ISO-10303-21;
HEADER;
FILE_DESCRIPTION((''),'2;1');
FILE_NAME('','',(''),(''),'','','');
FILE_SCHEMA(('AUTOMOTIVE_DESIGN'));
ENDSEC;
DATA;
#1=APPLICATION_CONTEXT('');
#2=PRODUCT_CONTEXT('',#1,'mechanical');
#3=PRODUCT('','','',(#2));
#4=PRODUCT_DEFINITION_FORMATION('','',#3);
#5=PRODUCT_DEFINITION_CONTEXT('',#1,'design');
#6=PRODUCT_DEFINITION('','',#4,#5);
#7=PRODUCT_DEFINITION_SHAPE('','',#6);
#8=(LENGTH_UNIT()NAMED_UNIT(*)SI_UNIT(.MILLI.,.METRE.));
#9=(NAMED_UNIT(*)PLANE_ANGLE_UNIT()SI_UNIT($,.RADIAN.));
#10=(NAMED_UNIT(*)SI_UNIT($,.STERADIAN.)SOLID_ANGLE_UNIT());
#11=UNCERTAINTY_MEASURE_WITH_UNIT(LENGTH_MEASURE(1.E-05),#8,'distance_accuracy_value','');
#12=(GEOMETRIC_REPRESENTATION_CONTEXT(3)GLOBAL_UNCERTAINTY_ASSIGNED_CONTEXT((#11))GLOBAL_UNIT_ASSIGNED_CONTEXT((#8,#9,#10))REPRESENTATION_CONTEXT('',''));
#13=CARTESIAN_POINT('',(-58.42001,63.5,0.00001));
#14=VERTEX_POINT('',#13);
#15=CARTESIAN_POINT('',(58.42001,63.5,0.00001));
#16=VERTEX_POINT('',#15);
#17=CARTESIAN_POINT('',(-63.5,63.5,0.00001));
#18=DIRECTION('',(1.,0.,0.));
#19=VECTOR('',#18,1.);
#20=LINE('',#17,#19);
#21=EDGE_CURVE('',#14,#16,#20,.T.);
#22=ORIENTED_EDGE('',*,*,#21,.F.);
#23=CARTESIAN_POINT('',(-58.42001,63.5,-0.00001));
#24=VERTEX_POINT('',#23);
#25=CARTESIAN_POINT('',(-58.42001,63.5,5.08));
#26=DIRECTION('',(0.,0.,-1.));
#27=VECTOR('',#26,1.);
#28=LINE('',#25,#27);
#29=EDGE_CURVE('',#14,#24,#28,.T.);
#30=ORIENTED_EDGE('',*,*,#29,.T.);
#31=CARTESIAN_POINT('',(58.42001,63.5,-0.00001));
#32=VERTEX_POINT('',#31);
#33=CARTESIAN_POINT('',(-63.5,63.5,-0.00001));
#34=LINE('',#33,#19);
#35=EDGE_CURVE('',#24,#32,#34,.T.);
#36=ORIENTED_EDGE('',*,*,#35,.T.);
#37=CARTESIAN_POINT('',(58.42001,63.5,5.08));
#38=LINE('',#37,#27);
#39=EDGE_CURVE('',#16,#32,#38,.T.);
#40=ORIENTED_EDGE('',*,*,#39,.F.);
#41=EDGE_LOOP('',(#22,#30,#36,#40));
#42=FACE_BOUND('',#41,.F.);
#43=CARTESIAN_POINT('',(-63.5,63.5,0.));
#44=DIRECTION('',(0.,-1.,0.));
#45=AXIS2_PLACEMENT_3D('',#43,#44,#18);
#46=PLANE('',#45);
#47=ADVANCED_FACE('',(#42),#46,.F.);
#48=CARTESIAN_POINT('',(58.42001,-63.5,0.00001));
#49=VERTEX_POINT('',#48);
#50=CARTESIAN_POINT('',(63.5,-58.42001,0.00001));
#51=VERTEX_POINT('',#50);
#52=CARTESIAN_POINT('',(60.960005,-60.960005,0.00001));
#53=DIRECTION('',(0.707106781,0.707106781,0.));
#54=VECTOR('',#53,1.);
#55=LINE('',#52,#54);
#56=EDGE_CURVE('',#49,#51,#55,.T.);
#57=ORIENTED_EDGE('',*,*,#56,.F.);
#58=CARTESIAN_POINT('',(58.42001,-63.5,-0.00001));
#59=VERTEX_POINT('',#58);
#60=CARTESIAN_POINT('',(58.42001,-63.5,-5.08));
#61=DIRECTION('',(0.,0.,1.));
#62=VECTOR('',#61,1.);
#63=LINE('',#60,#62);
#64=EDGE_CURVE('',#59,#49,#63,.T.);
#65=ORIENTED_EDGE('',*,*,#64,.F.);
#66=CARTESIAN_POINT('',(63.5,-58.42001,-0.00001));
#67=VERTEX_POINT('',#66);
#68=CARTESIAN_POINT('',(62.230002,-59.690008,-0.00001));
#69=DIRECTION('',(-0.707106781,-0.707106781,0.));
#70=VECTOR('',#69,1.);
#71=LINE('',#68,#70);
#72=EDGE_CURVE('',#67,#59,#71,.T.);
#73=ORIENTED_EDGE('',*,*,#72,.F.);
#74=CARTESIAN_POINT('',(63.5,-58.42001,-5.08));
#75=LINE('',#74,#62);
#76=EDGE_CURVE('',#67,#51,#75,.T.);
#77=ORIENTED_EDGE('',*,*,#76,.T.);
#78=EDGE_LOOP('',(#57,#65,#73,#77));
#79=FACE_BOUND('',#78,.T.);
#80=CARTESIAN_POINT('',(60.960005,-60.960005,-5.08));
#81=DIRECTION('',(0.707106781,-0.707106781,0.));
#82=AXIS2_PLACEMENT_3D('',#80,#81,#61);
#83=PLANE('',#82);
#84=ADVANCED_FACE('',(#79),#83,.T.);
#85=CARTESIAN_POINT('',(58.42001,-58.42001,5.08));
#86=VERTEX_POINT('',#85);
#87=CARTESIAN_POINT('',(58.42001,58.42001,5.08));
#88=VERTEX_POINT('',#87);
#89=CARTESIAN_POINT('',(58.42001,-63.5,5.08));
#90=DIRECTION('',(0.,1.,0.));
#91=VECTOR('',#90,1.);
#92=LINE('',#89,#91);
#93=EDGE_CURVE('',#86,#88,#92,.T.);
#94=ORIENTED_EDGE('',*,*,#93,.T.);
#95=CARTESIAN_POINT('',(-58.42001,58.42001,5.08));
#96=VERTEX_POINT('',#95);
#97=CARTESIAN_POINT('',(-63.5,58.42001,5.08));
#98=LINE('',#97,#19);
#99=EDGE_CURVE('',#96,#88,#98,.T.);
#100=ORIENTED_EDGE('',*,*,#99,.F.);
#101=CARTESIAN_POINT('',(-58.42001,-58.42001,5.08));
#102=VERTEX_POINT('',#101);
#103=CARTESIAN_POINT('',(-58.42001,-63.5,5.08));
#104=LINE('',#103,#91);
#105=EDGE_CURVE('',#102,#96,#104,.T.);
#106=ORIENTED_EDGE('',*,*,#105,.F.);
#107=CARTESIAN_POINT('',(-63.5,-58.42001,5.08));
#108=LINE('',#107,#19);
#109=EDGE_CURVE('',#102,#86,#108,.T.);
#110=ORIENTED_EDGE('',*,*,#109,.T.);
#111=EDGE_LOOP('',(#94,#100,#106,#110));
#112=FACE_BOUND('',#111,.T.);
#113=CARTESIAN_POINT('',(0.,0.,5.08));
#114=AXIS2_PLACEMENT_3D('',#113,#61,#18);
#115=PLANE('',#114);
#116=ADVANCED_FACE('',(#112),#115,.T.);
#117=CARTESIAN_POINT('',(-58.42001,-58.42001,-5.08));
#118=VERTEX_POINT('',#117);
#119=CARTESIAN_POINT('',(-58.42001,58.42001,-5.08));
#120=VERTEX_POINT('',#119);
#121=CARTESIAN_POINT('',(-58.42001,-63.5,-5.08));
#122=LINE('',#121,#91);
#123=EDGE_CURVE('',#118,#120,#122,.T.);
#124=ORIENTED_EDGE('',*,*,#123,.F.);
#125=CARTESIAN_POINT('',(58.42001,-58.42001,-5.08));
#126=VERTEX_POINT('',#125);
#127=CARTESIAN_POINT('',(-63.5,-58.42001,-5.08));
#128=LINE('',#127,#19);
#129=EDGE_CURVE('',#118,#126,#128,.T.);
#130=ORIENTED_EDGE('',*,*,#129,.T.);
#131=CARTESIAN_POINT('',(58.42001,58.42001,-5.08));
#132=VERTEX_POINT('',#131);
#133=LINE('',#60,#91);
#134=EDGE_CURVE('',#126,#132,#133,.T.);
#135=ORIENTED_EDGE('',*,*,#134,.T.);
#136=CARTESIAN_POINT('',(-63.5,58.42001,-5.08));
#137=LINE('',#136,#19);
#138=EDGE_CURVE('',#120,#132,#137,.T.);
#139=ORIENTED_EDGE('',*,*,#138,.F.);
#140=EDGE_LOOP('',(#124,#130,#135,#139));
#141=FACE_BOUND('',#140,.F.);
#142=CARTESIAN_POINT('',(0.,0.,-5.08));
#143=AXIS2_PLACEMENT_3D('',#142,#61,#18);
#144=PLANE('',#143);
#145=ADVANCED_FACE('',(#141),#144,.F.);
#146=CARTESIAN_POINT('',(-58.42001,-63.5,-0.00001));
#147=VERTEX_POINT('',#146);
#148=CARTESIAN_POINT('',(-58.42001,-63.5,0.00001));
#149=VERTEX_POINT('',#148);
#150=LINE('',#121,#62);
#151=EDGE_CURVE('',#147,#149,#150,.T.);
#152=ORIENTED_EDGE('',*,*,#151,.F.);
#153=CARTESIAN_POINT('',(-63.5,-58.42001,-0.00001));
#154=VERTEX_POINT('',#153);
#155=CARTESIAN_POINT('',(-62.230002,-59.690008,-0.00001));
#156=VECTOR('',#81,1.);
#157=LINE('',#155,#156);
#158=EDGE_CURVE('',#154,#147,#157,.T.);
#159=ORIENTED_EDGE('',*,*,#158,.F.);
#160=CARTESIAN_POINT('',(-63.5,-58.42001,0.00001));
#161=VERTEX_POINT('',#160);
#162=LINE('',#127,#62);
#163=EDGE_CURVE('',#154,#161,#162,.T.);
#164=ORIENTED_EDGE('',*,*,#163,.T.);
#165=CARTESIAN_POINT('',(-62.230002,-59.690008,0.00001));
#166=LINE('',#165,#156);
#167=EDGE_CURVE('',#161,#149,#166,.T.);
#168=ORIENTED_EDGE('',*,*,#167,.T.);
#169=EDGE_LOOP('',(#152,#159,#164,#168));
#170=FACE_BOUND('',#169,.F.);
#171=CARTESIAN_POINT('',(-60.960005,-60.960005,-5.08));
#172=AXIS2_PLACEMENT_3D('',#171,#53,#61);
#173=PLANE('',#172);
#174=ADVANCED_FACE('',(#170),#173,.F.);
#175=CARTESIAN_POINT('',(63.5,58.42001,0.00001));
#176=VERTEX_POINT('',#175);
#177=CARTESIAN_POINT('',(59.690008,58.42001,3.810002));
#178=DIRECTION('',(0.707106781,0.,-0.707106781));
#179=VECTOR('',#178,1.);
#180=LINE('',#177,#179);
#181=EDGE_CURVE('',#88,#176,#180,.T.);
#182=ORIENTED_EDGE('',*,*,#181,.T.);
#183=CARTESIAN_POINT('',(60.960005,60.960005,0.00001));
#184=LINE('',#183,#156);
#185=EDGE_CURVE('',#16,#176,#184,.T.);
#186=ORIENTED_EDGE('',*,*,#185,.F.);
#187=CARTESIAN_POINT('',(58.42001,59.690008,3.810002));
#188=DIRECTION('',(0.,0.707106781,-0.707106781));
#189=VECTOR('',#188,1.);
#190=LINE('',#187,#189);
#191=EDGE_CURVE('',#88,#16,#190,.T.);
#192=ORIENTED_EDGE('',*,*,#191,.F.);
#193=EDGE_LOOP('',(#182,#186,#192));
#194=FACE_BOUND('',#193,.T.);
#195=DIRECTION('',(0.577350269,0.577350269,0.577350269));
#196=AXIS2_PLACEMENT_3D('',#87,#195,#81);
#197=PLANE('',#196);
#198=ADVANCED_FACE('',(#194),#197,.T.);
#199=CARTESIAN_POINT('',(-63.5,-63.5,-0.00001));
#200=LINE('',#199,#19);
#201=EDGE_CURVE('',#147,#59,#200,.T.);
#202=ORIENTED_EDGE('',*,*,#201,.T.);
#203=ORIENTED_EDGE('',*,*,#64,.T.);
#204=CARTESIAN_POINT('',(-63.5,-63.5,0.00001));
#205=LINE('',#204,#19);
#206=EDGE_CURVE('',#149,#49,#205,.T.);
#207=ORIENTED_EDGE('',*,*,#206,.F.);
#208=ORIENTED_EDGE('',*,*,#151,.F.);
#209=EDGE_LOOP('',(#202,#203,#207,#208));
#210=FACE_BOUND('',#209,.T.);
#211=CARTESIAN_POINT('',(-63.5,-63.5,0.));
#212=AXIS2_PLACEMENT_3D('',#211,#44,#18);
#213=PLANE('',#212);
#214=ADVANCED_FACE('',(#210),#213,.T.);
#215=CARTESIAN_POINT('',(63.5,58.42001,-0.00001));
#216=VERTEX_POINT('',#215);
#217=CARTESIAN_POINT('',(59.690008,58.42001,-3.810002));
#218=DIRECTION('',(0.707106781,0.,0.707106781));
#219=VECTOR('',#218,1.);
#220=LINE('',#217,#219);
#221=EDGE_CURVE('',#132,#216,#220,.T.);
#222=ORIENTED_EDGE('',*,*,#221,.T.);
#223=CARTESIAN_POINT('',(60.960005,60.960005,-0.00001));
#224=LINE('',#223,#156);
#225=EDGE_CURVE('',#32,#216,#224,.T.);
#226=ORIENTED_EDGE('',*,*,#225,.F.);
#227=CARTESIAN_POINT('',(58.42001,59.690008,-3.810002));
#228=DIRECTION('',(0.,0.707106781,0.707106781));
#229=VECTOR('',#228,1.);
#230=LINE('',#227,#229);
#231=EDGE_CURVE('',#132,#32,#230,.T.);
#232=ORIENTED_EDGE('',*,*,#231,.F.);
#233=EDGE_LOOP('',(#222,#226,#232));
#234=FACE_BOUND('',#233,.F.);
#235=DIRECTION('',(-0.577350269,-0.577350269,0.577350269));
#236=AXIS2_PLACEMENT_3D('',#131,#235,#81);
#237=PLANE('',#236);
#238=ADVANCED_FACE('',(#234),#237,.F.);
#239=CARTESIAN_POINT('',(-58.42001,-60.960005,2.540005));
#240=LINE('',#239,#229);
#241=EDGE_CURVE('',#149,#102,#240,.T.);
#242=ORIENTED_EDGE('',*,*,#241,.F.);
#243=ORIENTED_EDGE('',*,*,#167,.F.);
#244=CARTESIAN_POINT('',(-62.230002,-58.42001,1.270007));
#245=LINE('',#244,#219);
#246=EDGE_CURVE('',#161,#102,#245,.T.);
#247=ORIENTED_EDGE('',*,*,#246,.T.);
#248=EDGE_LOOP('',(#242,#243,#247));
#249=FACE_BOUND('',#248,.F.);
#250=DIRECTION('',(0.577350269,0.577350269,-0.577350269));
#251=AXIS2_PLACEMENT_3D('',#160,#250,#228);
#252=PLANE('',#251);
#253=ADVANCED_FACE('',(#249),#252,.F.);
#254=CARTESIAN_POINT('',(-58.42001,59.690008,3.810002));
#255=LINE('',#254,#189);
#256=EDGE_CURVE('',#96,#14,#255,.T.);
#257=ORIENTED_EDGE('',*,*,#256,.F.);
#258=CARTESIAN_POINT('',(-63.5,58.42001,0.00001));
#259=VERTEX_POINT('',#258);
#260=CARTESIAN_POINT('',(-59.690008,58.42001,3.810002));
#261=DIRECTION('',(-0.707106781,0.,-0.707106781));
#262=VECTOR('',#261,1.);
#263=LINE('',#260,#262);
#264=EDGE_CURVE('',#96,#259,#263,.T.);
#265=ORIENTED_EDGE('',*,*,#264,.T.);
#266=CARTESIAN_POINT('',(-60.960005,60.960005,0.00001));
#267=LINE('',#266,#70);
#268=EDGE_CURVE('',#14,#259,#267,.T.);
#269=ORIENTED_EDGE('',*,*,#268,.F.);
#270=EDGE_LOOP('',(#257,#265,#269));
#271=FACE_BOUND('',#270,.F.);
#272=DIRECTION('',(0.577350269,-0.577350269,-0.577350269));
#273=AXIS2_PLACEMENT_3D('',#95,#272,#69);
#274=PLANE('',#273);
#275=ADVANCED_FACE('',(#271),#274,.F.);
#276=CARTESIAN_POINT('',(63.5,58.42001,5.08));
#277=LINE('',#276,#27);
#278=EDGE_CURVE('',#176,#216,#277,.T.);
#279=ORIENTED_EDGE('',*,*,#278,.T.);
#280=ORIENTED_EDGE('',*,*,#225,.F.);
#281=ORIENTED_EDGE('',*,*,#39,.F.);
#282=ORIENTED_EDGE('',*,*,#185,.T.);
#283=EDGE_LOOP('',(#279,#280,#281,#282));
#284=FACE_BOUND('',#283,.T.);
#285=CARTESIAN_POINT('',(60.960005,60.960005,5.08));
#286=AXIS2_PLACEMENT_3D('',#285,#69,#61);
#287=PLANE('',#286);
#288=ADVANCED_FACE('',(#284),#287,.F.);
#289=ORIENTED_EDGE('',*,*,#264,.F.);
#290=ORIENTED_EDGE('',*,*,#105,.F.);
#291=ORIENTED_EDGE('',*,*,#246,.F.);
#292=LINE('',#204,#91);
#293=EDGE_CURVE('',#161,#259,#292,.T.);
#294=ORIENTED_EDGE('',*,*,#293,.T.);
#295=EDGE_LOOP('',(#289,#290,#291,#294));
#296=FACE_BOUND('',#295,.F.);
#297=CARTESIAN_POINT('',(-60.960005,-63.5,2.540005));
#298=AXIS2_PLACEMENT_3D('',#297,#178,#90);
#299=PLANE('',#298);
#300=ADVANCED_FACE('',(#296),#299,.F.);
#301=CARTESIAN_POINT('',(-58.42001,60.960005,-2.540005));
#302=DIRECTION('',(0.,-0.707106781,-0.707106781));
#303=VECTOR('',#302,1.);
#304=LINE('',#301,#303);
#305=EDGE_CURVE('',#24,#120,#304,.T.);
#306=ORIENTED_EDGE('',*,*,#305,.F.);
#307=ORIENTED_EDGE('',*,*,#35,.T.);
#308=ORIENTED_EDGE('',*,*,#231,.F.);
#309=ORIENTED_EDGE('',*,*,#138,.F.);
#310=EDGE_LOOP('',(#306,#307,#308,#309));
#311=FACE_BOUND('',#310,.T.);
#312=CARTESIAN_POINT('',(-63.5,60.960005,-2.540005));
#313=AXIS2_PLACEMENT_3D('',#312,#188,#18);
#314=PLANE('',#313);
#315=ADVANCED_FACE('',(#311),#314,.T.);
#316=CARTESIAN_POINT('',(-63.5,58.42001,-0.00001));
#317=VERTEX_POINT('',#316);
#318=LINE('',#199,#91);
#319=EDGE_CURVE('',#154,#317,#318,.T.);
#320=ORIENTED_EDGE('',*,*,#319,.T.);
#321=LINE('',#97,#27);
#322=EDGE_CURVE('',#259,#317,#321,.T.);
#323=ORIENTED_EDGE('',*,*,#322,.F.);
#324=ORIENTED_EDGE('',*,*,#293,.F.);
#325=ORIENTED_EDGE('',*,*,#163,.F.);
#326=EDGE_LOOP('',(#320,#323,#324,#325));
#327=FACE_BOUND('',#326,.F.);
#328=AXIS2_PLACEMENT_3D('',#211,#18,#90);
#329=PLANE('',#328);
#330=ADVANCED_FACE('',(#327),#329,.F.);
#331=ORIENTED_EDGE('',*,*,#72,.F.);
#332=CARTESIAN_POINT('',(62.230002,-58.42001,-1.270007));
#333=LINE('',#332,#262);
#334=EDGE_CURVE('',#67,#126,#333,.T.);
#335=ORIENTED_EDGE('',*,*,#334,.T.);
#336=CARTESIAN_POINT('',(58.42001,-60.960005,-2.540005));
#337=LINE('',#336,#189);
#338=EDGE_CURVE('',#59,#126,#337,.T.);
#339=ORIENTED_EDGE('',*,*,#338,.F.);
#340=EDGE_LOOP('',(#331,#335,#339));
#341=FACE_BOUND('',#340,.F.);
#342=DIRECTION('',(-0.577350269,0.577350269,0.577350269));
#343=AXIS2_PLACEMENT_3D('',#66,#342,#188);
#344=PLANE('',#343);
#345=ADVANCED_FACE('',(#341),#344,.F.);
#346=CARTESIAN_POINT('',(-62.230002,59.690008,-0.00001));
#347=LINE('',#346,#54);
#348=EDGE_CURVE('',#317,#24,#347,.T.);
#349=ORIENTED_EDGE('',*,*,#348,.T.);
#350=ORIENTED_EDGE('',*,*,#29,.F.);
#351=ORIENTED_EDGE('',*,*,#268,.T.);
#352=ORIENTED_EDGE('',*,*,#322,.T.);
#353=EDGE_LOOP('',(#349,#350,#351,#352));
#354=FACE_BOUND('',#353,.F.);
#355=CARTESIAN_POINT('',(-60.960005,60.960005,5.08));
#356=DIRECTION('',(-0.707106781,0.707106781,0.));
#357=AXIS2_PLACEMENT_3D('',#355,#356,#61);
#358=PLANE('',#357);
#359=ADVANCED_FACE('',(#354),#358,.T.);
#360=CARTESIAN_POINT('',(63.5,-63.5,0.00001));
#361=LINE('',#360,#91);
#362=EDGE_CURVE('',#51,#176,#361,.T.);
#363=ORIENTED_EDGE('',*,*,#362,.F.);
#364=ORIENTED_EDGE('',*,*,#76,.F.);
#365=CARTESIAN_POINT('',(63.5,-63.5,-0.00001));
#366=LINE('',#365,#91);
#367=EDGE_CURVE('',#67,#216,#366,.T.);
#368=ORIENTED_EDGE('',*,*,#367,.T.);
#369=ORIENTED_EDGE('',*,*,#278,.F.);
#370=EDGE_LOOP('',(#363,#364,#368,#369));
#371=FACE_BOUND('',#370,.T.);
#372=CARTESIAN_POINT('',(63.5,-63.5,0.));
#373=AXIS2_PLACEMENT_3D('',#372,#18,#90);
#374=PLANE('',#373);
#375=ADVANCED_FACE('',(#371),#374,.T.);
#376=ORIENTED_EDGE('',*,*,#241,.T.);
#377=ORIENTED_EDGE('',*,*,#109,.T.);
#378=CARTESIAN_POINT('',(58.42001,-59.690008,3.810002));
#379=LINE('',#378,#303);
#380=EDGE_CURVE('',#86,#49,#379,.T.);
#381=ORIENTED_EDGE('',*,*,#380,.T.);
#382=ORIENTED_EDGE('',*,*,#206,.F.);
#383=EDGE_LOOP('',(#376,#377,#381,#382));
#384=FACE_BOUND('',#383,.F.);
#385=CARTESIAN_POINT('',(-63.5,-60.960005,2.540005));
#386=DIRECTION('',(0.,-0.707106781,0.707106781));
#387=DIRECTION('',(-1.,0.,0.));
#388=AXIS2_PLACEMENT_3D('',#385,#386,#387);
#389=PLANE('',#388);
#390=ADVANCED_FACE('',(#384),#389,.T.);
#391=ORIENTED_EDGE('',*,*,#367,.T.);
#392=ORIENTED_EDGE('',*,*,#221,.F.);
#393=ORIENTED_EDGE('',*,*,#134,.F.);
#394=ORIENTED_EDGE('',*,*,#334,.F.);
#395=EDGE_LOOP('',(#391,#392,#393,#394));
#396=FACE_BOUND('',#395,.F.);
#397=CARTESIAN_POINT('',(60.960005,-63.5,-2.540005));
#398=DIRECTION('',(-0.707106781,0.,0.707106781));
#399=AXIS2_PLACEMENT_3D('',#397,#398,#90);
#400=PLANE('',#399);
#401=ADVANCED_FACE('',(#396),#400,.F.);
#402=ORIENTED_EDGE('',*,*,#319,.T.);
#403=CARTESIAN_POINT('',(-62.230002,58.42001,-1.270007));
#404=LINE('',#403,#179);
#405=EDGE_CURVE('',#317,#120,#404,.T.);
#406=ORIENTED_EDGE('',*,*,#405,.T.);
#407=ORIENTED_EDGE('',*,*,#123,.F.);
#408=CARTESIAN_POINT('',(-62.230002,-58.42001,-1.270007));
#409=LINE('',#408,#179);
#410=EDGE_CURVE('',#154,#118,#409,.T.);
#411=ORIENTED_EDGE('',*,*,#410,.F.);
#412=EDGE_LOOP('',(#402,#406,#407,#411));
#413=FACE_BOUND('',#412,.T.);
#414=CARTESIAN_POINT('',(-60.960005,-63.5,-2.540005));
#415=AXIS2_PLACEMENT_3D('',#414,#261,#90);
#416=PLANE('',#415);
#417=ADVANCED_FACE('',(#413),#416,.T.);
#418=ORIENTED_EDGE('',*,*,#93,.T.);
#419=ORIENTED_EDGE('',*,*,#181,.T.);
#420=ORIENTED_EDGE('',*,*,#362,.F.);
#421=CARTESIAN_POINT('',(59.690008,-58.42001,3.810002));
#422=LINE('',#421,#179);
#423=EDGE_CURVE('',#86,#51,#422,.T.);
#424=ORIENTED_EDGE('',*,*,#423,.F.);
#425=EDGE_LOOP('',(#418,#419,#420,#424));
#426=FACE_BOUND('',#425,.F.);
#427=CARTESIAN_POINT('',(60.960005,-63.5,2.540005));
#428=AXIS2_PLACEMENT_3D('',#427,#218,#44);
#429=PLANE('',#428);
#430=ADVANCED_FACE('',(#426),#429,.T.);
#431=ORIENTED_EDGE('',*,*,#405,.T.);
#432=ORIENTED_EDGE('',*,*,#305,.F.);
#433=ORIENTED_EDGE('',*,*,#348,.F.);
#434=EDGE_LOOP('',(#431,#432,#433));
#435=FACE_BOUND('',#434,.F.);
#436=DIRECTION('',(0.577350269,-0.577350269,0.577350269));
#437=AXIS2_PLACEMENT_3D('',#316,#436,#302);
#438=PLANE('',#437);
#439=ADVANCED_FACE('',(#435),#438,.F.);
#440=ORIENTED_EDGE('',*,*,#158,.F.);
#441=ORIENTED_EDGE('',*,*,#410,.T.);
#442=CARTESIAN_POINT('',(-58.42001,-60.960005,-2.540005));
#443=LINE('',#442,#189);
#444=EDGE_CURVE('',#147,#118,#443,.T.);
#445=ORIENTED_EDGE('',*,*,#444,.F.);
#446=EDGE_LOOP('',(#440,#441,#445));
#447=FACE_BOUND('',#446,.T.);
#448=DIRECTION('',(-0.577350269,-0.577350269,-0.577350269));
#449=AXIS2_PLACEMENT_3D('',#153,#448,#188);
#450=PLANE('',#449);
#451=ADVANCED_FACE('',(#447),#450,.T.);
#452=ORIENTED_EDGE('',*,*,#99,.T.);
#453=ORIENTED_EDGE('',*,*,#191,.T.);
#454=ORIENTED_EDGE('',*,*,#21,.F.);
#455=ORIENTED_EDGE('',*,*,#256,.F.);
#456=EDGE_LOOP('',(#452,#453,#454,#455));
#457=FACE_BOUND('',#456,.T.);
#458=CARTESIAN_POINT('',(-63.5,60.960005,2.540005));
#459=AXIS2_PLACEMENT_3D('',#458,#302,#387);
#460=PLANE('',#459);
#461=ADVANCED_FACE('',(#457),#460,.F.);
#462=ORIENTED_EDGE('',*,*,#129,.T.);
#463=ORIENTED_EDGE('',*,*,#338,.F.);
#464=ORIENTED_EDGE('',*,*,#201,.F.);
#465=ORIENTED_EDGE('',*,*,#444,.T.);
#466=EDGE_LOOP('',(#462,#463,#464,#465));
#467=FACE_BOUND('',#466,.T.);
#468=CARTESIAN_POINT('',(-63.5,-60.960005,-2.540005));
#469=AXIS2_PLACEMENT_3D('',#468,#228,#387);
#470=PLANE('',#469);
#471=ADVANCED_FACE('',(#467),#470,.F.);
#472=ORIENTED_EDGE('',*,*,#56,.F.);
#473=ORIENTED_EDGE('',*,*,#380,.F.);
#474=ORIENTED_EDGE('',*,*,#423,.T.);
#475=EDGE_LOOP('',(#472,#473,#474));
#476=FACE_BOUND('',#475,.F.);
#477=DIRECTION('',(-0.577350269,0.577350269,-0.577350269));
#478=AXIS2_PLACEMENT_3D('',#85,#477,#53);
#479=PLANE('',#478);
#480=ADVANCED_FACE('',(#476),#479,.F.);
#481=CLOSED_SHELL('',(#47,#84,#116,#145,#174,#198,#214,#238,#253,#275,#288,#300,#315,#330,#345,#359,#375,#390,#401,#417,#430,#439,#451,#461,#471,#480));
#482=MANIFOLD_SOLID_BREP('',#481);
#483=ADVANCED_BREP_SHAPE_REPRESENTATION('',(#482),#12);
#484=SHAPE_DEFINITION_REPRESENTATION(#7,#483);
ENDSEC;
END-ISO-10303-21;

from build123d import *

# Parameters (mm, degrees)
F0_W     = 127
F0_H     = 127
F1_DEPTH = 5.08
F2_SIZE  = 5.07999


# Not quite as in the source:
# - a fillet or chamfer is up to 0.001 mm smaller than in the source, because OpenCascade refuses the exact size


with BuildPart() as f1:
    # F0 (on Top) → F1 (new body, symmetric)
    with BuildSketch(Plane.XY):
        Rectangle(F0_W, F0_H)
    extrude(amount=F1_DEPTH, both=True)

    # F2 (size 5.08 in the source; OpenCascade refuses exactly that, so slightly less here)
    f2_edges = [f1.edges().sort_by_distance(p)[0] for p in [
        (0, -63.5, -5.08),
        (63.5, -63.5, 0),
        (0, -63.5, 5.08),
        (-63.5, -63.5, 0),
        (63.5, 63.5, 0),
        (0, 63.5, -5.08),
        (-63.5, 63.5, 0),
        (0, 63.5, 5.08),
        (63.5, 0, -5.08),
        (63.5, 0, 5.08),
        (-63.5, 0, -5.08),
        (-63.5, 0, 5.08),
    ]]
    chamfer(f2_edges, length=F2_SIZE)


solid = f1.part
